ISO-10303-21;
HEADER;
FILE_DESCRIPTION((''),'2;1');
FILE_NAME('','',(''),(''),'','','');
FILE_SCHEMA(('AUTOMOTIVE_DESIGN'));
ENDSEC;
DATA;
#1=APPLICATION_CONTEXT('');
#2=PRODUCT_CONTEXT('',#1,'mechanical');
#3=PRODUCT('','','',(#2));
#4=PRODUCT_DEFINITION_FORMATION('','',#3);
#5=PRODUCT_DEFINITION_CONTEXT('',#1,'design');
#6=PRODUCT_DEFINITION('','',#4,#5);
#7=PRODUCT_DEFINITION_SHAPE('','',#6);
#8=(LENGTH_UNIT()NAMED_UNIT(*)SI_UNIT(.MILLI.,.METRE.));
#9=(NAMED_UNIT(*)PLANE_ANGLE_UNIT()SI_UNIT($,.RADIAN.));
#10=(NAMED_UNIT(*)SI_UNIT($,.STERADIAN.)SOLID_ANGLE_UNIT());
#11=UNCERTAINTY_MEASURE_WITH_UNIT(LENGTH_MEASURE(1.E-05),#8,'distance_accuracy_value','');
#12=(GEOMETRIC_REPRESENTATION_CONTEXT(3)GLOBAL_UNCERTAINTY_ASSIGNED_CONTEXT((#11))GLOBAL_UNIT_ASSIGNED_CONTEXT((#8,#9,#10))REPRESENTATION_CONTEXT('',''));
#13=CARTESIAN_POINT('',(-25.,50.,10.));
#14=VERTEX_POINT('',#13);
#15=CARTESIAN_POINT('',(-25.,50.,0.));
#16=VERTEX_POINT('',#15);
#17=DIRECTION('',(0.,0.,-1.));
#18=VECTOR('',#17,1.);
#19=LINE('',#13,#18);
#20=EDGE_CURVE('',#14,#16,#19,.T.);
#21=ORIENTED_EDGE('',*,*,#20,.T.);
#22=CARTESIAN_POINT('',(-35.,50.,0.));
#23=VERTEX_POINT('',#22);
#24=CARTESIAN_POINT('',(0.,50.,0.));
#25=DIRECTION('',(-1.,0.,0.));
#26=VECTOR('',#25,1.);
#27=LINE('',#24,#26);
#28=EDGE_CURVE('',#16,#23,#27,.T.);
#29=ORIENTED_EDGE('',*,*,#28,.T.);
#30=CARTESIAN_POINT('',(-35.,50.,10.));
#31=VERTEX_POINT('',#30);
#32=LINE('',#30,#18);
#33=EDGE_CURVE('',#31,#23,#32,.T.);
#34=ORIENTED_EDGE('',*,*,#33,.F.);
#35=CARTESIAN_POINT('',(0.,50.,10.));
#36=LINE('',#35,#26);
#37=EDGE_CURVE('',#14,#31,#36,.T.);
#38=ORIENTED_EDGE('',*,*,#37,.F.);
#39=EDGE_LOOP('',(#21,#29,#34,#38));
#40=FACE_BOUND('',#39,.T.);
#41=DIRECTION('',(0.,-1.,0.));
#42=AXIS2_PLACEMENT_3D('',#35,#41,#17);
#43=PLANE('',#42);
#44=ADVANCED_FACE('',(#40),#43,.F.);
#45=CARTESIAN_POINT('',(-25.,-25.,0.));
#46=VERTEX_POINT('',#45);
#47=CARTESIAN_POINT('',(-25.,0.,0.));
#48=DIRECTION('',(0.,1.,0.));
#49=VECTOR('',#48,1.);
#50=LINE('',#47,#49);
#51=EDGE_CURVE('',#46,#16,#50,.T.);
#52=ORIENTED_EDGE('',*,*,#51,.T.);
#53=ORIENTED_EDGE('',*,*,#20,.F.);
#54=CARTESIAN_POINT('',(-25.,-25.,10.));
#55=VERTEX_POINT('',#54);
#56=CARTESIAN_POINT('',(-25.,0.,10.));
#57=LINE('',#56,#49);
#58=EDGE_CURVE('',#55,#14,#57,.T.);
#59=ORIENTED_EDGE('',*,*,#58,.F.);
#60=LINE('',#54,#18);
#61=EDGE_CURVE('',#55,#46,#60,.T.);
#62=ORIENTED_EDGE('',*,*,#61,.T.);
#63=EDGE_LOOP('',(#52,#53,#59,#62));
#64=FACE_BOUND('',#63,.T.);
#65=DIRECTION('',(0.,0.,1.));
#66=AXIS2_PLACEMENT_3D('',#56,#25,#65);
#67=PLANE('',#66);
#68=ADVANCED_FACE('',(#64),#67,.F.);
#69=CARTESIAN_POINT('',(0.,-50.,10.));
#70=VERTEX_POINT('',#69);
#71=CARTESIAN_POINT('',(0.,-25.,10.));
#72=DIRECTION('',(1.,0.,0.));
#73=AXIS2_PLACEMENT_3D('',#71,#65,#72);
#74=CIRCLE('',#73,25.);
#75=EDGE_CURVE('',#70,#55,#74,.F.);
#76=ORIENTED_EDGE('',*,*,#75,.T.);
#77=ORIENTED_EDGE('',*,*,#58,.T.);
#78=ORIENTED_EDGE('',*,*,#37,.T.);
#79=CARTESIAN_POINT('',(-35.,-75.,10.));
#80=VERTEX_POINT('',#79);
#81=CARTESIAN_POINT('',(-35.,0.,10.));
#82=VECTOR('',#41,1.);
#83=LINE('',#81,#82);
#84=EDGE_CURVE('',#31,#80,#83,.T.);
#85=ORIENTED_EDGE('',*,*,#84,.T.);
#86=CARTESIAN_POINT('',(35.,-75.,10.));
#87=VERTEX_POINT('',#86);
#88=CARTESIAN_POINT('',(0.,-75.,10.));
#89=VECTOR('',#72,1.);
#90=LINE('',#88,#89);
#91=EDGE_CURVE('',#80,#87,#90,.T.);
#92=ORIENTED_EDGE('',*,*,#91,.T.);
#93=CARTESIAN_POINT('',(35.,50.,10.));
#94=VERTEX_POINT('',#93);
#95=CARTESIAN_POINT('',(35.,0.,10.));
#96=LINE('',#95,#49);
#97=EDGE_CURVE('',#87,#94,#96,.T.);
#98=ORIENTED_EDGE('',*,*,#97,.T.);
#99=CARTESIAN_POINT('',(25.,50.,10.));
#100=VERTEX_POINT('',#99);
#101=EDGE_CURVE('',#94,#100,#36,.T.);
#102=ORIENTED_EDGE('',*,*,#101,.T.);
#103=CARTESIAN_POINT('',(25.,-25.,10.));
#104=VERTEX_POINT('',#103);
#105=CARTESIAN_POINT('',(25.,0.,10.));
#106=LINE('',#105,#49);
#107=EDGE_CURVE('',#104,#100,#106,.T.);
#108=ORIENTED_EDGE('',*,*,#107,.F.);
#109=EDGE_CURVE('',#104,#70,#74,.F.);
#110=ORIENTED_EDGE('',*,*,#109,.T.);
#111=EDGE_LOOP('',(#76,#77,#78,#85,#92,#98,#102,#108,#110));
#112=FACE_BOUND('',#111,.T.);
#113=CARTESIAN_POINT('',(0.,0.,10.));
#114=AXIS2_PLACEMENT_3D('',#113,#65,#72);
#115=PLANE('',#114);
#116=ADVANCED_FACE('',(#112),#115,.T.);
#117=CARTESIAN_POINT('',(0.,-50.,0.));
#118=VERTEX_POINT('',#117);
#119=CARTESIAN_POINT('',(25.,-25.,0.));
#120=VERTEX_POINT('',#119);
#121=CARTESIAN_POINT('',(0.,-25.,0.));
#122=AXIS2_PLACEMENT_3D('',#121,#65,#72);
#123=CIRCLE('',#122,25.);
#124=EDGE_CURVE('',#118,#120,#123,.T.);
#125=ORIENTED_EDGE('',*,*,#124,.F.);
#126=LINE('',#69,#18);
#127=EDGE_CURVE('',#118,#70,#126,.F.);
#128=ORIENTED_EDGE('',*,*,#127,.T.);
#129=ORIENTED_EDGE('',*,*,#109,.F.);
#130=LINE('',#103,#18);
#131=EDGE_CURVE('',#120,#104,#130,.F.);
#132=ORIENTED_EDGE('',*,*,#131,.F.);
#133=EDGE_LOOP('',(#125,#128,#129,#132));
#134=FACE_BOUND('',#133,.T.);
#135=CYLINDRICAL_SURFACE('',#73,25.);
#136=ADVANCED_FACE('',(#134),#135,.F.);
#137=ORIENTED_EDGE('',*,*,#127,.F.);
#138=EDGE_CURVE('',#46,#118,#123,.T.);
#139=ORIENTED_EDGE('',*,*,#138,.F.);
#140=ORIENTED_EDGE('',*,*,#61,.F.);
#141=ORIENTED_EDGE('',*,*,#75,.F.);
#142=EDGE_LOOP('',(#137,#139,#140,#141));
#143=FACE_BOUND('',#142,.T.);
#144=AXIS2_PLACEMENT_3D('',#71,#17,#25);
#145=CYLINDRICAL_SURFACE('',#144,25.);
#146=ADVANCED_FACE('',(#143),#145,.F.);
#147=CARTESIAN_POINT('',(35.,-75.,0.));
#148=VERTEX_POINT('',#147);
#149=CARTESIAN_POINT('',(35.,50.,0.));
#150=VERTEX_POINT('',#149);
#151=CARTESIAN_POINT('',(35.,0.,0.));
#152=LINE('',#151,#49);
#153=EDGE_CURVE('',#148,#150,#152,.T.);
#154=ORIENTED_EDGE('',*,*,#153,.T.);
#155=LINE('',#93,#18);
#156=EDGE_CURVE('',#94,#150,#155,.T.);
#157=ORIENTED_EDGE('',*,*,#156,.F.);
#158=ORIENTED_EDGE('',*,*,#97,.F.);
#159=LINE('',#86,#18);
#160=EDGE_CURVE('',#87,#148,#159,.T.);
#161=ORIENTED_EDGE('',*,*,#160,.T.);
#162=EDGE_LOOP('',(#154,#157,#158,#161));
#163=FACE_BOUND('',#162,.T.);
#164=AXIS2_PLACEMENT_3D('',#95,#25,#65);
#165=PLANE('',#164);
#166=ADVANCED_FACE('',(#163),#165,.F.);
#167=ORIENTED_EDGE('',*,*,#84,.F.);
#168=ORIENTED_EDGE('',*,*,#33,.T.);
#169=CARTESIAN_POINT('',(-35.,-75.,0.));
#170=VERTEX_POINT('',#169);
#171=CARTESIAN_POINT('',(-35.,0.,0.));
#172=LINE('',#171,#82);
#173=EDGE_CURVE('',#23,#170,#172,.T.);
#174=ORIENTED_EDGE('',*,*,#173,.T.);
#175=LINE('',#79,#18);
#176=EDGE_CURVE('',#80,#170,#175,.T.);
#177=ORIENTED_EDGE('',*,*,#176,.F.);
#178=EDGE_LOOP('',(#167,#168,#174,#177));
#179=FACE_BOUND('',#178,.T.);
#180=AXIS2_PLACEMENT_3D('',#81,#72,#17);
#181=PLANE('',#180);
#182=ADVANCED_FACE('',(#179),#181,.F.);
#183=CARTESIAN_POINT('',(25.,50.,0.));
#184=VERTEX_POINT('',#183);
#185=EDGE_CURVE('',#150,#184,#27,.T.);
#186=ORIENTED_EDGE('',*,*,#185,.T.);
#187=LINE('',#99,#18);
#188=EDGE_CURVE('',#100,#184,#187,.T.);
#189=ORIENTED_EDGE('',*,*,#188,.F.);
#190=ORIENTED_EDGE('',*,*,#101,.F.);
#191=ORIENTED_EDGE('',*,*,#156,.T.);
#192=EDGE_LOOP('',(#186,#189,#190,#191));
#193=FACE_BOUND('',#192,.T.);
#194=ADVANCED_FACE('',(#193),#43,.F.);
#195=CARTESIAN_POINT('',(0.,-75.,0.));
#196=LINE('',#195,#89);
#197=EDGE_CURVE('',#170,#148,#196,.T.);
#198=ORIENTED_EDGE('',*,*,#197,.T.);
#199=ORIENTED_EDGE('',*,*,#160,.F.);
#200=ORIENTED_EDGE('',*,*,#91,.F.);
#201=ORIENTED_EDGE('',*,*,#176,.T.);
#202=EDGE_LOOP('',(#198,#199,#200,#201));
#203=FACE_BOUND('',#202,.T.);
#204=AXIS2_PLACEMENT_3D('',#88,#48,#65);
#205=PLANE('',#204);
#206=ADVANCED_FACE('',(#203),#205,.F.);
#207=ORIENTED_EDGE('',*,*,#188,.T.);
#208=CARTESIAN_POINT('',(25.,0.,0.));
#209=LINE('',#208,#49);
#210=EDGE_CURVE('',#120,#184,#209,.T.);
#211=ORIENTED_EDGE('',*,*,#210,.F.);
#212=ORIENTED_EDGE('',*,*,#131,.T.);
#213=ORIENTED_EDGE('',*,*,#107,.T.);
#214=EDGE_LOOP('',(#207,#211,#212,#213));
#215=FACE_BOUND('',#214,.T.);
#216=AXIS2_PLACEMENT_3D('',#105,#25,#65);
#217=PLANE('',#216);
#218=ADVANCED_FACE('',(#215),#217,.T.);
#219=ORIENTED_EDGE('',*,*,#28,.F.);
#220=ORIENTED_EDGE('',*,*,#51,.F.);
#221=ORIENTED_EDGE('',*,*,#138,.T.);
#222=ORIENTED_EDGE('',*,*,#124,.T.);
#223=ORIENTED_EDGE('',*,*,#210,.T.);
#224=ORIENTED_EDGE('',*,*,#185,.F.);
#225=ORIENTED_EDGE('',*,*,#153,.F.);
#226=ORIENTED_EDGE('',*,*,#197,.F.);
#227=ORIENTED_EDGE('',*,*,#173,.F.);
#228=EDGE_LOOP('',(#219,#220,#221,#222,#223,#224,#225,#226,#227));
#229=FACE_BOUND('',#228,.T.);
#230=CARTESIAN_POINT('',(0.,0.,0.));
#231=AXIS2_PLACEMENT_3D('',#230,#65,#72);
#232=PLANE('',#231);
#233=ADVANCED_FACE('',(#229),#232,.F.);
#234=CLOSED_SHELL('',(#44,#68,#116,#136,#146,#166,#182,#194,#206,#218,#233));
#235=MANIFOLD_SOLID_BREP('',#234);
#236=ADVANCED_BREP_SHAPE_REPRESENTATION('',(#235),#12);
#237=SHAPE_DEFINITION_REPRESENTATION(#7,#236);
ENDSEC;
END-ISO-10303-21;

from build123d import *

# Parameters (mm, degrees)
BOSS_EXTRUDE1_DEPTH = 10
FILLET1_R           = 25


with BuildPart() as part:
    # Sketch1 → Boss-Extrude1 (new body)
    with BuildSketch(Plane.XY):
        Polygon((35, -75), (35, 50), (25, 50), (25, -50), (-25, -50), (-25, 50), (-35, 50), (-35, -75), align=None)
    extrude(amount=BOSS_EXTRUDE1_DEPTH)

    # Fillet1
    fillet1_edges = [part.edges().sort_by_distance(p)[0] for p in [
        (25, -50, 5),
        (-25, -50, 5),
    ]]
    fillet(fillet1_edges, radius=FILLET1_R - 0.0001)  # a hair under: the kernel refuses the full size


solid = part.part
